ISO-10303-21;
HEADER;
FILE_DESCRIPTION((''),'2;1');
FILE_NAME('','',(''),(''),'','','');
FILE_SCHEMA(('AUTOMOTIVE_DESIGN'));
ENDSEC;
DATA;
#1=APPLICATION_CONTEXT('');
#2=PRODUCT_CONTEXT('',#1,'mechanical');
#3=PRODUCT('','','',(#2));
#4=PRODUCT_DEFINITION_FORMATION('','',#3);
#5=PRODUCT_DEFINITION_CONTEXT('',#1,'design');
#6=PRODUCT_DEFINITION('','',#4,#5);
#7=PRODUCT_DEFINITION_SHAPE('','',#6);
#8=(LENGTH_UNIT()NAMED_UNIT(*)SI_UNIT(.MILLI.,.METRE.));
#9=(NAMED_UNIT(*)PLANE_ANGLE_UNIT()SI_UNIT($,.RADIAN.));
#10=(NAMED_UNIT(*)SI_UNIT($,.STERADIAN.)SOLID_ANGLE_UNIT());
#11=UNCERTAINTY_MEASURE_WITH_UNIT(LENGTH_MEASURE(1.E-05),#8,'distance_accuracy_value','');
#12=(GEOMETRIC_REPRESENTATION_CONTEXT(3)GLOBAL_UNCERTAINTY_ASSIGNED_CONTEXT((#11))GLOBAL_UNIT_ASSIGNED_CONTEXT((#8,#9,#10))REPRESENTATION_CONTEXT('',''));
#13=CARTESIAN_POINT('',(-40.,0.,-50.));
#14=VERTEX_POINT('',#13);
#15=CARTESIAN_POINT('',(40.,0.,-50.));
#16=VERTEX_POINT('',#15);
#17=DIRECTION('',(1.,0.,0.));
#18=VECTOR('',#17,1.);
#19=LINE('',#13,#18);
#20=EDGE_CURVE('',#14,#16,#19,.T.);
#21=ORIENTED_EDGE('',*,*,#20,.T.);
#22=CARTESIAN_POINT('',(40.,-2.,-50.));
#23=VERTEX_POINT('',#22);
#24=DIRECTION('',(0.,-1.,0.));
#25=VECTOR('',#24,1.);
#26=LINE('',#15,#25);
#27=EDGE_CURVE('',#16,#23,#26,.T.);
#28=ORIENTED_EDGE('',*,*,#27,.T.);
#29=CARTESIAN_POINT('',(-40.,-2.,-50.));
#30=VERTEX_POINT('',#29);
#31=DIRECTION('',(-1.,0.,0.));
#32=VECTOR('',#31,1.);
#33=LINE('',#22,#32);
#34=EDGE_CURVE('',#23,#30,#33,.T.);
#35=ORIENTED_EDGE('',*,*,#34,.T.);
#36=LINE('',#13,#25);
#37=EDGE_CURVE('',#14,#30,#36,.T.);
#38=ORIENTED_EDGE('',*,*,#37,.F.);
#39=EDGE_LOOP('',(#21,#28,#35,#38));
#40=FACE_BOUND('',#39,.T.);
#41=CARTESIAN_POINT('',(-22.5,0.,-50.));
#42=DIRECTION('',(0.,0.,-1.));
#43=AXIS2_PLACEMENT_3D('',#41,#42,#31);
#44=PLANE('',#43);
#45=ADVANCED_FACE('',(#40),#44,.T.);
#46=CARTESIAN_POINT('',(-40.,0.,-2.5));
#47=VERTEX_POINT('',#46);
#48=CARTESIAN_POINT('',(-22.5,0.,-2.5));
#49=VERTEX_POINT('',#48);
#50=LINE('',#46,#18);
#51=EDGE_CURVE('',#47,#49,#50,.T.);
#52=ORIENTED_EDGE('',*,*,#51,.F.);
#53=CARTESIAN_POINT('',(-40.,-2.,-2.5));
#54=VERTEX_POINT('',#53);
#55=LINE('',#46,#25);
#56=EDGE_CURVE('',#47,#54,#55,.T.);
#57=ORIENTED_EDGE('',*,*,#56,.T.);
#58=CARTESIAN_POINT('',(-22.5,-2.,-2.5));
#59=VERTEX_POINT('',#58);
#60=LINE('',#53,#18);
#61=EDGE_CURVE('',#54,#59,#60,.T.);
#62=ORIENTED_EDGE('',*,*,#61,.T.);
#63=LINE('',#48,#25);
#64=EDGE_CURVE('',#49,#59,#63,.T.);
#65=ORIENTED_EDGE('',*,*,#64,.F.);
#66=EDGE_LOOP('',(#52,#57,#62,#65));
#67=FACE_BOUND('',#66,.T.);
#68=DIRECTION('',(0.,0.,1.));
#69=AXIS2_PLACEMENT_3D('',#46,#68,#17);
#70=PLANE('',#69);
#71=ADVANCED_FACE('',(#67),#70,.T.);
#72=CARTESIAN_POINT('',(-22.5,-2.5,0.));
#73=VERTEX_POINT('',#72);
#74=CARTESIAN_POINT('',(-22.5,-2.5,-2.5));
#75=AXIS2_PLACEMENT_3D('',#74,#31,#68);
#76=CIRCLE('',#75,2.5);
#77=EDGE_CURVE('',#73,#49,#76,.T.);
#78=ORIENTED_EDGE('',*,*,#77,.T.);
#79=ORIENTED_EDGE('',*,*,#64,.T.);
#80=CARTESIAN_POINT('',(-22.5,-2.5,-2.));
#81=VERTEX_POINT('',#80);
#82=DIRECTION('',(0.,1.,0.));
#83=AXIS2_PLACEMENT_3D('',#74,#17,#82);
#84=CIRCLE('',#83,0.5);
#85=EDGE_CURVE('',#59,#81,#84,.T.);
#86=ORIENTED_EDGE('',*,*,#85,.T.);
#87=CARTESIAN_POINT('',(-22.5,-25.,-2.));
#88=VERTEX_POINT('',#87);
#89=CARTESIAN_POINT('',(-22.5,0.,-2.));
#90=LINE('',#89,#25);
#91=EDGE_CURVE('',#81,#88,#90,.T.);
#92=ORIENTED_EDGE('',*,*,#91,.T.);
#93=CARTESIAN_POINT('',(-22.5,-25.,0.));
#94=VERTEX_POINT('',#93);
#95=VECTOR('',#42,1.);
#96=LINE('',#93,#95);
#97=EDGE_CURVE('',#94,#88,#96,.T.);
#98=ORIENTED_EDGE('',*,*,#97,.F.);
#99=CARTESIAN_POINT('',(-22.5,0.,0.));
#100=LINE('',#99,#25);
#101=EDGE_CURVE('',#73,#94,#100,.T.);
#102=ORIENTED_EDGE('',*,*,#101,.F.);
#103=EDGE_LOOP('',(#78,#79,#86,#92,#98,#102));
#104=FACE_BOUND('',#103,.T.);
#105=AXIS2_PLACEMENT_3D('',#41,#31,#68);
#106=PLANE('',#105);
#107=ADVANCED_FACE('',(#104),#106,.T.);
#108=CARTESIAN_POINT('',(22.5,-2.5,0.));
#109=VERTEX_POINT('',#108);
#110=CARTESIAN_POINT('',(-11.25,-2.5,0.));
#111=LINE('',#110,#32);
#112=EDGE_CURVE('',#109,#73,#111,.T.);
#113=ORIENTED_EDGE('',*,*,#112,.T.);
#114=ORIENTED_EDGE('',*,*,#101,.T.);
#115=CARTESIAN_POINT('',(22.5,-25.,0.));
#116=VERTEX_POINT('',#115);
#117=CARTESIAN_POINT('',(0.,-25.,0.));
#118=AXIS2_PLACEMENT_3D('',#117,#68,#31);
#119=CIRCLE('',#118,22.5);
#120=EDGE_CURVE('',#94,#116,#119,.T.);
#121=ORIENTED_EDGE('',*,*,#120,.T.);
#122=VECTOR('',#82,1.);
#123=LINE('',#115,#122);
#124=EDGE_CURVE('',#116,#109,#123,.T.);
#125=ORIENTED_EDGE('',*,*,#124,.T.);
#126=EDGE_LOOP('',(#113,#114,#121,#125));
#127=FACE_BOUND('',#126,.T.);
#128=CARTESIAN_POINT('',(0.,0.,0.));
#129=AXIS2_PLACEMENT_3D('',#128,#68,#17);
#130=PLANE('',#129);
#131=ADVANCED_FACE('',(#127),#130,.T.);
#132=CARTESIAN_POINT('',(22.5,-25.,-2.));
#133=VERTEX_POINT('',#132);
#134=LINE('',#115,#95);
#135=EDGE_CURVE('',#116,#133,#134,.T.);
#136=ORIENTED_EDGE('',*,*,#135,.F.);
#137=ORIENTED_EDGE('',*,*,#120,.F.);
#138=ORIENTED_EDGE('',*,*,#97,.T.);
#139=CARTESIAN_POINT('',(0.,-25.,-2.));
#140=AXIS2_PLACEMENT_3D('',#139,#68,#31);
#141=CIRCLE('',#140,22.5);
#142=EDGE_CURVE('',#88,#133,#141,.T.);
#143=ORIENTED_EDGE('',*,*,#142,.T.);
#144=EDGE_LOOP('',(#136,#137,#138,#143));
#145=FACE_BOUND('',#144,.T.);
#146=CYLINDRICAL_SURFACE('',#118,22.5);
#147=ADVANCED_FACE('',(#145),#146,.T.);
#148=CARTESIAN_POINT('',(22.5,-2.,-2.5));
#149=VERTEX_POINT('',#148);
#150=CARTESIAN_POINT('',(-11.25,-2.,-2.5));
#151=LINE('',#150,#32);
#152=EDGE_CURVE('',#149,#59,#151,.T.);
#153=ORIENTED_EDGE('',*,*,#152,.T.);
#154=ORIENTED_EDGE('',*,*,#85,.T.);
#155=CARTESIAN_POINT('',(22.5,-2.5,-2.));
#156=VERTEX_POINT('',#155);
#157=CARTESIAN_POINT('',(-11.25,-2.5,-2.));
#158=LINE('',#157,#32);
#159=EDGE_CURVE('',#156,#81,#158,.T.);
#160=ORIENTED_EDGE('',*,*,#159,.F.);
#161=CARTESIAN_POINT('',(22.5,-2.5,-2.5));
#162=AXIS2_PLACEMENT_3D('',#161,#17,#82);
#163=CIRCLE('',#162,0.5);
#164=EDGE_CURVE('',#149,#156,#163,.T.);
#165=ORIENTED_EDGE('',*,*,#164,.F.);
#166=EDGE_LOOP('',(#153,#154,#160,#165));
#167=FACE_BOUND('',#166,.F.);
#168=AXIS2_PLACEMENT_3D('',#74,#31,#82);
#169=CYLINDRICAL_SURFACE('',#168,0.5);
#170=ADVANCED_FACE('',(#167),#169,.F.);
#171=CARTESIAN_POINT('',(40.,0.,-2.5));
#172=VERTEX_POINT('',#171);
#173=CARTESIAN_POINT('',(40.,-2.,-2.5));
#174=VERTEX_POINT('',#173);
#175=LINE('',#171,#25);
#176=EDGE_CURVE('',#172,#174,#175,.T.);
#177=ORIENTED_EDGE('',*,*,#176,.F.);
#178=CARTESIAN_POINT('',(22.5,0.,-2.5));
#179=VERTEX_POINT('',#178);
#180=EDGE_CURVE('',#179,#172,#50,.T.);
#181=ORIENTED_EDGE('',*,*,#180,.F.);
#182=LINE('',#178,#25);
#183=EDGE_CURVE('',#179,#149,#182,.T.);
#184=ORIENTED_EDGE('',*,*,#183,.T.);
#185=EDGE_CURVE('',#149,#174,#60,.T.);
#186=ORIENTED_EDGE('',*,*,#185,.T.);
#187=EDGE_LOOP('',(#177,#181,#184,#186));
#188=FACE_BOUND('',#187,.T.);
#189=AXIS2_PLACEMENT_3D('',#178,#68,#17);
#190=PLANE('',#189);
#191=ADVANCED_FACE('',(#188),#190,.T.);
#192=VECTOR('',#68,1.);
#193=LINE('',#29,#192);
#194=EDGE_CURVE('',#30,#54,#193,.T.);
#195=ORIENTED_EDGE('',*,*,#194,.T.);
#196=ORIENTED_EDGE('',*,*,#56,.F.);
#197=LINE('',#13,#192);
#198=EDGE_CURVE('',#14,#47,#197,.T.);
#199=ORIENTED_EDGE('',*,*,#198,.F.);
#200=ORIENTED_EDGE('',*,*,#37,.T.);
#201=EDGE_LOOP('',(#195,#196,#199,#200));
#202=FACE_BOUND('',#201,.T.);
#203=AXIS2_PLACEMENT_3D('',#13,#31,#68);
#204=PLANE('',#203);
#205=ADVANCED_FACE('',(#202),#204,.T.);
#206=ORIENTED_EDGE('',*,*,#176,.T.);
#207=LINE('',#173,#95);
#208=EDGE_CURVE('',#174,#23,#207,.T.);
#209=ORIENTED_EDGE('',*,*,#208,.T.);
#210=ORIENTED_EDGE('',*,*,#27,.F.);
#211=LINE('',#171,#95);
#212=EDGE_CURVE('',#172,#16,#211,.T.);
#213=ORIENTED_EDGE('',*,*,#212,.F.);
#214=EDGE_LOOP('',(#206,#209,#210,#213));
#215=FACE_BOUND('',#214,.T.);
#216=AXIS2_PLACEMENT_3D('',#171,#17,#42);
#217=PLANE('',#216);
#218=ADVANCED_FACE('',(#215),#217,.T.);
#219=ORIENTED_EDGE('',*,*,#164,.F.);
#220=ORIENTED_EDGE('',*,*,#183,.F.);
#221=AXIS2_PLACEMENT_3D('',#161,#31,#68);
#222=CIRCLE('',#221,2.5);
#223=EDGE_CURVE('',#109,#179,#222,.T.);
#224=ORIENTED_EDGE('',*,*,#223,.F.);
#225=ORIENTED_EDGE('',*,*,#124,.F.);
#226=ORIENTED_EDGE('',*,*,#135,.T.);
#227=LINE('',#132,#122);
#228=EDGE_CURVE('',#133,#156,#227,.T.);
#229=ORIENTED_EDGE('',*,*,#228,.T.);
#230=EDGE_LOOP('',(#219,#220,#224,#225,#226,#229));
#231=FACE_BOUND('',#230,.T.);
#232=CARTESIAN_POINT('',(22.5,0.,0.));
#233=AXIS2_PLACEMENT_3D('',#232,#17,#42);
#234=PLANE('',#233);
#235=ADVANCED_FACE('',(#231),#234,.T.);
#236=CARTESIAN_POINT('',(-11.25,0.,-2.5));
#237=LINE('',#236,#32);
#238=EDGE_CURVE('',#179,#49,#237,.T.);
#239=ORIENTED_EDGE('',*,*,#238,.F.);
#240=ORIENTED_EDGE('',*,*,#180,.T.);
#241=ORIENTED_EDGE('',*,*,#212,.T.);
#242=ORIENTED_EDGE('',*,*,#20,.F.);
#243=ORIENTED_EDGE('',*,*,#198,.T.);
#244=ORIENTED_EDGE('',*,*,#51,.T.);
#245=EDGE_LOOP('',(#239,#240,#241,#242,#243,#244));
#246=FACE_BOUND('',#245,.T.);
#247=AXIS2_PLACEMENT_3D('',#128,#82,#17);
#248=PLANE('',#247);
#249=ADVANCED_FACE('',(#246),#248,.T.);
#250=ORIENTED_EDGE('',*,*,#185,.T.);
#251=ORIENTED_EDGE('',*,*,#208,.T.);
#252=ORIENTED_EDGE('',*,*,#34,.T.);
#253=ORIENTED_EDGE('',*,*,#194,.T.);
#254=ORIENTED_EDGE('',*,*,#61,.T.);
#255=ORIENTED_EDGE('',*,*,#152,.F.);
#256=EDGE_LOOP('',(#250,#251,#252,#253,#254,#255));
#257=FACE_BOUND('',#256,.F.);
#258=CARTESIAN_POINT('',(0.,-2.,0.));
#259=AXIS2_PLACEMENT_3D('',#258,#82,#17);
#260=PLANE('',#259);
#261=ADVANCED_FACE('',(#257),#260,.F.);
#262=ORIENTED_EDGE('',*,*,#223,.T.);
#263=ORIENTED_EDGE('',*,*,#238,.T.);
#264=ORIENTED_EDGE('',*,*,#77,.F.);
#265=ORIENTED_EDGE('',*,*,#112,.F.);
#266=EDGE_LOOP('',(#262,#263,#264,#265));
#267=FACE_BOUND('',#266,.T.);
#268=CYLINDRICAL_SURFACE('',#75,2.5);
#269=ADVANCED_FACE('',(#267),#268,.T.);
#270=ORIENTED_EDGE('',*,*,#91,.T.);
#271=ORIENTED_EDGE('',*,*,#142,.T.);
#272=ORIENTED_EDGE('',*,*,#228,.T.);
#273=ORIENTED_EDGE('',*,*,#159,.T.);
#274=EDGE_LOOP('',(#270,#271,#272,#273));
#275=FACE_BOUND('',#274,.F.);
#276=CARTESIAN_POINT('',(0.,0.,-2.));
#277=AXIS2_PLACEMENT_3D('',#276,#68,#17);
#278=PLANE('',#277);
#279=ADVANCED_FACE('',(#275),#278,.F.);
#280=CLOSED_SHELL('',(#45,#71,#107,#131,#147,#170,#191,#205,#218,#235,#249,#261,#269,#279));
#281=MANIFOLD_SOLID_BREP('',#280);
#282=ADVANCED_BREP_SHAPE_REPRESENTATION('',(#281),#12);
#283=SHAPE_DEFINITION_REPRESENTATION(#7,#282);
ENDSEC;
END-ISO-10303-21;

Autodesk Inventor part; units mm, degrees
ref_plane "Work Plane1" through (0, -25, -17) normal (0, 0, 1) x (1, 0, 0)
ref_plane "YZ Plane" through (0, 0, 0) normal (1, 0, 0) x (0, 1, 0)
ref_plane "XZ Plane" through (0, 0, 0) normal (0, 1, 0) x (-1, 0, 0)
sketch "Sketch2" plane through (0, 0, 0) normal (0, 1, 0) x (-1, 0, 0)
  line L0 (22.5, 0) -> (-22.5, 0)
  line L1 (-22.5, 0) -> (-22.5, -50)
  line L2 (-22.5, -50) -> (22.5, -50)
  line L3 (22.5, -50) -> (22.5, 0)
  point P0 (0, 0)
  point P1 (0, 0)
  dimension "d4" = 50
  dimension "d5" = 45
extrude "Extrusion1" add sketch "Sketch2" against normal blind 2
sketch "Sketch3" plane through (0, 0, 0) normal (0, 0, 1) x (1, 0, 0)
  circle A0 centre (0, -25) radius 15.5
  arc A1 (-22.5, -25) -> (22.5, -25) centre (0, -25) ccw projected
  point P0 (0, 0)
  point P1 (-15.5, -25)
  point P2 (15.5, -25)
  point P3 (-7.75, -11.5766)
  point P4 (7.75, -38.4234)
  point P5 (-7.75, -38.4234)
  point P6 (7.75, -11.5766)
  dimension "d14" = 31
  dimension "d17" = 360
sketch "Sketch4" plane through (0, 0, 0) normal (0, 1, 0) x (1, 0, 0)
  line L0 (-34.5, 43) -> (34.5, 43) construction
  line L1 (34.5, 43) -> (34.5, 9) construction
  line L2 (34.5, 9) -> (-34.5, 9) construction
  line L3 (-34.5, 9) -> (-34.5, 43) construction
  line L4 (22.5, 50) -> (-22.5, 50) construction
  point P0 (0, 0)
  point P1 (0, 43)
  point P2 (0, 50)
  dimension "d26" = 34
  dimension "d27" = 69
  dimension "d36" = 7
sketch "Sketch6" plane through (0, 0, 0) normal (0, 0, 1) x (1, 0, 0)
  line L0 (0, -23) -> (0, -25) construction
  line L1 (-12.5, -23) -> (-12.5, -25)
  line L2 (12.5, -25) -> (12.5, -23)
  arc A0 (12.5, -23) -> (-12.5, -23) centre (0, -23) ccw
  arc A1 (-12.5, -25) -> (12.5, -25) centre (0, -25) ccw
  arc A2 (-22.5, -25) -> (22.5, -25) centre (0, -25) ccw projected
  point P0 (0, 0)
  point P1 (0, -24)
  dimension "d45" = 25
  dimension "d46" = 2
sketch "Sketch10" plane through (0, -25, -17) normal (0, 0, 1) x (1, 0, 0)
  arc A0 (-12.5, 0) -> (12.5, 0) centre (0, 0) ccw projected
  circle A1 centre (0, 0) radius 19
  line L0 (0, 0) -> (0, 23) construction
  line L1 (22.5, 23) -> (-22.5, 23) projected
  line L2 (-22.5, 0) -> (-22.5, 23)
  line L3 (22.5, 23) -> (22.5, 0)
  arc A2 (-22.5, 0) -> (22.5, 0) centre (0, 0) ccw
  arc A3 (22.5, 23) -> (-22.5, 23) centre (0, 23) ccw construction
  arc A4 (-22.5, 0) -> (22.5, 0) centre (0, 0) ccw projected
  line L4 (37, 23) -> (-37, 23) projected
  point P0 (19.5, 23)
  point P1 (-19.5, 23)
  point P2 (0, 11.5)
  dimension "d69" = 38
sketch "Sketch12" plane through (-22.5, -25, -2) normal (-1, 0, 0) x (0, 0, 1)
  line L0 (3, 22.5) -> (3, 0) projected
  line L1 (3, 11) -> (-20, 11)
  line L2 (-20, 11) -> (-34, 23)
  line L3 (-45, 23) -> (-3.5, 23) projected
  line L4 (-20, 0) -> (-20, 23) projected
  line L5 (-15, 23) -> (-15, 0) projected
  line L6 (0, 22.5) -> (0, 0) projected
  line L7 (0, 22.5) -> (0, 23)
  line L8 (0, 23) -> (-3.5, 23)
  point P0 (2, 25)
  point P1 (-15, 11)
  point P2 (0, 11)
  dimension "d72" = 12
  dimension "d73" = 14
sketch "Sketch1" plane through (0, 0, 0) normal (0, 0, 1) x (1, 0, 0)
  line L0 (0, 0) -> (0, -25) construction
  line L1 (-22.5, 0) -> (-22.5, -25)
  line L2 (22.5, -25) -> (22.5, 0)
  arc A0 (22.5, 0) -> (-22.5, 0) centre (0, 0) ccw construction
  arc A1 (-22.5, -25) -> (22.5, -25) centre (0, -25) ccw
  circle A2 centre (0, -25) radius 18.5 construction
  line L3 (22.5, 0) -> (-22.5, 0)
  line L4 (22.5, 0) -> (22.5, -2)
  line L5 (22.5, -2) -> (-22.5, -2)
  line L6 (-22.5, -2) -> (-22.5, 0)
  line L7 (-22.5, 0) -> (22.5, 0)
  point P0 (0, -12.5)
  point P1 (0, -6.5)
  dimension "d1" = 37
  dimension "d3" = 6.5
sheet face with bend "Face1" sketch "Sketch1" thickness 2 toward (0, 0, -1) bend radius 0.5 contours L5 L2 A1 L1
bend "Bend1"
sketch "Sketch8" plane through (0, 0, 0) normal (0, 1, 0) x (1, 0, 0)
  line L0 (-40, 2.5) -> (40, 2.5)
  line L1 (40, 2.5) -> (40, 50)
  line L2 (40, 50) -> (-40, 50)
  line L3 (-40, 50) -> (-40, 2.5)
  line L4 (-40, 2.5) -> (40, 50) construction
  line L5 (40, 2.5) -> (-40, 50) construction
  line L6 (22.5, 50) -> (-22.5, 50) projected
  line L7 (-22.5, 2.5) -> (22.5, 2.5) projected
  point P0 (0, 0)
  point P1 (0, 26.25)
  point P2 (0, 26.25)
  dimension "d50" = 80
extrude "Extrusion3" add sketch "Sketch8" against normal up to surface (2 mm away)
equation "\"d8\" = Thickness"
equation "\"d10\" = BendReliefWidth"
equation "\"d12\" = MinimumRemnant"
equation "\"d11\" = BendReliefDepth"
equation "\"d13\" = TransitionRadius"
equation "\"BendRadius\" = Thickness"
equation "\"BendReliefWidth\" = Thickness"
equation "\"BendReliefDepth\" = 0.5 * Thickness"
equation "\"CornerReliefSize\" = 4 * Thickness"
equation "\"MinimumRemnant\" = 2 * Thickness"
equation "\"TransitionRadius\" = BendRadius"
equation "\"JacobiRadiusSize\" = BendRadius"
equation "\"GapSize\" = Thickness"
equation "\"Thickness\" = 2"
properties part number "12v DC motor mount (3D printed)"
